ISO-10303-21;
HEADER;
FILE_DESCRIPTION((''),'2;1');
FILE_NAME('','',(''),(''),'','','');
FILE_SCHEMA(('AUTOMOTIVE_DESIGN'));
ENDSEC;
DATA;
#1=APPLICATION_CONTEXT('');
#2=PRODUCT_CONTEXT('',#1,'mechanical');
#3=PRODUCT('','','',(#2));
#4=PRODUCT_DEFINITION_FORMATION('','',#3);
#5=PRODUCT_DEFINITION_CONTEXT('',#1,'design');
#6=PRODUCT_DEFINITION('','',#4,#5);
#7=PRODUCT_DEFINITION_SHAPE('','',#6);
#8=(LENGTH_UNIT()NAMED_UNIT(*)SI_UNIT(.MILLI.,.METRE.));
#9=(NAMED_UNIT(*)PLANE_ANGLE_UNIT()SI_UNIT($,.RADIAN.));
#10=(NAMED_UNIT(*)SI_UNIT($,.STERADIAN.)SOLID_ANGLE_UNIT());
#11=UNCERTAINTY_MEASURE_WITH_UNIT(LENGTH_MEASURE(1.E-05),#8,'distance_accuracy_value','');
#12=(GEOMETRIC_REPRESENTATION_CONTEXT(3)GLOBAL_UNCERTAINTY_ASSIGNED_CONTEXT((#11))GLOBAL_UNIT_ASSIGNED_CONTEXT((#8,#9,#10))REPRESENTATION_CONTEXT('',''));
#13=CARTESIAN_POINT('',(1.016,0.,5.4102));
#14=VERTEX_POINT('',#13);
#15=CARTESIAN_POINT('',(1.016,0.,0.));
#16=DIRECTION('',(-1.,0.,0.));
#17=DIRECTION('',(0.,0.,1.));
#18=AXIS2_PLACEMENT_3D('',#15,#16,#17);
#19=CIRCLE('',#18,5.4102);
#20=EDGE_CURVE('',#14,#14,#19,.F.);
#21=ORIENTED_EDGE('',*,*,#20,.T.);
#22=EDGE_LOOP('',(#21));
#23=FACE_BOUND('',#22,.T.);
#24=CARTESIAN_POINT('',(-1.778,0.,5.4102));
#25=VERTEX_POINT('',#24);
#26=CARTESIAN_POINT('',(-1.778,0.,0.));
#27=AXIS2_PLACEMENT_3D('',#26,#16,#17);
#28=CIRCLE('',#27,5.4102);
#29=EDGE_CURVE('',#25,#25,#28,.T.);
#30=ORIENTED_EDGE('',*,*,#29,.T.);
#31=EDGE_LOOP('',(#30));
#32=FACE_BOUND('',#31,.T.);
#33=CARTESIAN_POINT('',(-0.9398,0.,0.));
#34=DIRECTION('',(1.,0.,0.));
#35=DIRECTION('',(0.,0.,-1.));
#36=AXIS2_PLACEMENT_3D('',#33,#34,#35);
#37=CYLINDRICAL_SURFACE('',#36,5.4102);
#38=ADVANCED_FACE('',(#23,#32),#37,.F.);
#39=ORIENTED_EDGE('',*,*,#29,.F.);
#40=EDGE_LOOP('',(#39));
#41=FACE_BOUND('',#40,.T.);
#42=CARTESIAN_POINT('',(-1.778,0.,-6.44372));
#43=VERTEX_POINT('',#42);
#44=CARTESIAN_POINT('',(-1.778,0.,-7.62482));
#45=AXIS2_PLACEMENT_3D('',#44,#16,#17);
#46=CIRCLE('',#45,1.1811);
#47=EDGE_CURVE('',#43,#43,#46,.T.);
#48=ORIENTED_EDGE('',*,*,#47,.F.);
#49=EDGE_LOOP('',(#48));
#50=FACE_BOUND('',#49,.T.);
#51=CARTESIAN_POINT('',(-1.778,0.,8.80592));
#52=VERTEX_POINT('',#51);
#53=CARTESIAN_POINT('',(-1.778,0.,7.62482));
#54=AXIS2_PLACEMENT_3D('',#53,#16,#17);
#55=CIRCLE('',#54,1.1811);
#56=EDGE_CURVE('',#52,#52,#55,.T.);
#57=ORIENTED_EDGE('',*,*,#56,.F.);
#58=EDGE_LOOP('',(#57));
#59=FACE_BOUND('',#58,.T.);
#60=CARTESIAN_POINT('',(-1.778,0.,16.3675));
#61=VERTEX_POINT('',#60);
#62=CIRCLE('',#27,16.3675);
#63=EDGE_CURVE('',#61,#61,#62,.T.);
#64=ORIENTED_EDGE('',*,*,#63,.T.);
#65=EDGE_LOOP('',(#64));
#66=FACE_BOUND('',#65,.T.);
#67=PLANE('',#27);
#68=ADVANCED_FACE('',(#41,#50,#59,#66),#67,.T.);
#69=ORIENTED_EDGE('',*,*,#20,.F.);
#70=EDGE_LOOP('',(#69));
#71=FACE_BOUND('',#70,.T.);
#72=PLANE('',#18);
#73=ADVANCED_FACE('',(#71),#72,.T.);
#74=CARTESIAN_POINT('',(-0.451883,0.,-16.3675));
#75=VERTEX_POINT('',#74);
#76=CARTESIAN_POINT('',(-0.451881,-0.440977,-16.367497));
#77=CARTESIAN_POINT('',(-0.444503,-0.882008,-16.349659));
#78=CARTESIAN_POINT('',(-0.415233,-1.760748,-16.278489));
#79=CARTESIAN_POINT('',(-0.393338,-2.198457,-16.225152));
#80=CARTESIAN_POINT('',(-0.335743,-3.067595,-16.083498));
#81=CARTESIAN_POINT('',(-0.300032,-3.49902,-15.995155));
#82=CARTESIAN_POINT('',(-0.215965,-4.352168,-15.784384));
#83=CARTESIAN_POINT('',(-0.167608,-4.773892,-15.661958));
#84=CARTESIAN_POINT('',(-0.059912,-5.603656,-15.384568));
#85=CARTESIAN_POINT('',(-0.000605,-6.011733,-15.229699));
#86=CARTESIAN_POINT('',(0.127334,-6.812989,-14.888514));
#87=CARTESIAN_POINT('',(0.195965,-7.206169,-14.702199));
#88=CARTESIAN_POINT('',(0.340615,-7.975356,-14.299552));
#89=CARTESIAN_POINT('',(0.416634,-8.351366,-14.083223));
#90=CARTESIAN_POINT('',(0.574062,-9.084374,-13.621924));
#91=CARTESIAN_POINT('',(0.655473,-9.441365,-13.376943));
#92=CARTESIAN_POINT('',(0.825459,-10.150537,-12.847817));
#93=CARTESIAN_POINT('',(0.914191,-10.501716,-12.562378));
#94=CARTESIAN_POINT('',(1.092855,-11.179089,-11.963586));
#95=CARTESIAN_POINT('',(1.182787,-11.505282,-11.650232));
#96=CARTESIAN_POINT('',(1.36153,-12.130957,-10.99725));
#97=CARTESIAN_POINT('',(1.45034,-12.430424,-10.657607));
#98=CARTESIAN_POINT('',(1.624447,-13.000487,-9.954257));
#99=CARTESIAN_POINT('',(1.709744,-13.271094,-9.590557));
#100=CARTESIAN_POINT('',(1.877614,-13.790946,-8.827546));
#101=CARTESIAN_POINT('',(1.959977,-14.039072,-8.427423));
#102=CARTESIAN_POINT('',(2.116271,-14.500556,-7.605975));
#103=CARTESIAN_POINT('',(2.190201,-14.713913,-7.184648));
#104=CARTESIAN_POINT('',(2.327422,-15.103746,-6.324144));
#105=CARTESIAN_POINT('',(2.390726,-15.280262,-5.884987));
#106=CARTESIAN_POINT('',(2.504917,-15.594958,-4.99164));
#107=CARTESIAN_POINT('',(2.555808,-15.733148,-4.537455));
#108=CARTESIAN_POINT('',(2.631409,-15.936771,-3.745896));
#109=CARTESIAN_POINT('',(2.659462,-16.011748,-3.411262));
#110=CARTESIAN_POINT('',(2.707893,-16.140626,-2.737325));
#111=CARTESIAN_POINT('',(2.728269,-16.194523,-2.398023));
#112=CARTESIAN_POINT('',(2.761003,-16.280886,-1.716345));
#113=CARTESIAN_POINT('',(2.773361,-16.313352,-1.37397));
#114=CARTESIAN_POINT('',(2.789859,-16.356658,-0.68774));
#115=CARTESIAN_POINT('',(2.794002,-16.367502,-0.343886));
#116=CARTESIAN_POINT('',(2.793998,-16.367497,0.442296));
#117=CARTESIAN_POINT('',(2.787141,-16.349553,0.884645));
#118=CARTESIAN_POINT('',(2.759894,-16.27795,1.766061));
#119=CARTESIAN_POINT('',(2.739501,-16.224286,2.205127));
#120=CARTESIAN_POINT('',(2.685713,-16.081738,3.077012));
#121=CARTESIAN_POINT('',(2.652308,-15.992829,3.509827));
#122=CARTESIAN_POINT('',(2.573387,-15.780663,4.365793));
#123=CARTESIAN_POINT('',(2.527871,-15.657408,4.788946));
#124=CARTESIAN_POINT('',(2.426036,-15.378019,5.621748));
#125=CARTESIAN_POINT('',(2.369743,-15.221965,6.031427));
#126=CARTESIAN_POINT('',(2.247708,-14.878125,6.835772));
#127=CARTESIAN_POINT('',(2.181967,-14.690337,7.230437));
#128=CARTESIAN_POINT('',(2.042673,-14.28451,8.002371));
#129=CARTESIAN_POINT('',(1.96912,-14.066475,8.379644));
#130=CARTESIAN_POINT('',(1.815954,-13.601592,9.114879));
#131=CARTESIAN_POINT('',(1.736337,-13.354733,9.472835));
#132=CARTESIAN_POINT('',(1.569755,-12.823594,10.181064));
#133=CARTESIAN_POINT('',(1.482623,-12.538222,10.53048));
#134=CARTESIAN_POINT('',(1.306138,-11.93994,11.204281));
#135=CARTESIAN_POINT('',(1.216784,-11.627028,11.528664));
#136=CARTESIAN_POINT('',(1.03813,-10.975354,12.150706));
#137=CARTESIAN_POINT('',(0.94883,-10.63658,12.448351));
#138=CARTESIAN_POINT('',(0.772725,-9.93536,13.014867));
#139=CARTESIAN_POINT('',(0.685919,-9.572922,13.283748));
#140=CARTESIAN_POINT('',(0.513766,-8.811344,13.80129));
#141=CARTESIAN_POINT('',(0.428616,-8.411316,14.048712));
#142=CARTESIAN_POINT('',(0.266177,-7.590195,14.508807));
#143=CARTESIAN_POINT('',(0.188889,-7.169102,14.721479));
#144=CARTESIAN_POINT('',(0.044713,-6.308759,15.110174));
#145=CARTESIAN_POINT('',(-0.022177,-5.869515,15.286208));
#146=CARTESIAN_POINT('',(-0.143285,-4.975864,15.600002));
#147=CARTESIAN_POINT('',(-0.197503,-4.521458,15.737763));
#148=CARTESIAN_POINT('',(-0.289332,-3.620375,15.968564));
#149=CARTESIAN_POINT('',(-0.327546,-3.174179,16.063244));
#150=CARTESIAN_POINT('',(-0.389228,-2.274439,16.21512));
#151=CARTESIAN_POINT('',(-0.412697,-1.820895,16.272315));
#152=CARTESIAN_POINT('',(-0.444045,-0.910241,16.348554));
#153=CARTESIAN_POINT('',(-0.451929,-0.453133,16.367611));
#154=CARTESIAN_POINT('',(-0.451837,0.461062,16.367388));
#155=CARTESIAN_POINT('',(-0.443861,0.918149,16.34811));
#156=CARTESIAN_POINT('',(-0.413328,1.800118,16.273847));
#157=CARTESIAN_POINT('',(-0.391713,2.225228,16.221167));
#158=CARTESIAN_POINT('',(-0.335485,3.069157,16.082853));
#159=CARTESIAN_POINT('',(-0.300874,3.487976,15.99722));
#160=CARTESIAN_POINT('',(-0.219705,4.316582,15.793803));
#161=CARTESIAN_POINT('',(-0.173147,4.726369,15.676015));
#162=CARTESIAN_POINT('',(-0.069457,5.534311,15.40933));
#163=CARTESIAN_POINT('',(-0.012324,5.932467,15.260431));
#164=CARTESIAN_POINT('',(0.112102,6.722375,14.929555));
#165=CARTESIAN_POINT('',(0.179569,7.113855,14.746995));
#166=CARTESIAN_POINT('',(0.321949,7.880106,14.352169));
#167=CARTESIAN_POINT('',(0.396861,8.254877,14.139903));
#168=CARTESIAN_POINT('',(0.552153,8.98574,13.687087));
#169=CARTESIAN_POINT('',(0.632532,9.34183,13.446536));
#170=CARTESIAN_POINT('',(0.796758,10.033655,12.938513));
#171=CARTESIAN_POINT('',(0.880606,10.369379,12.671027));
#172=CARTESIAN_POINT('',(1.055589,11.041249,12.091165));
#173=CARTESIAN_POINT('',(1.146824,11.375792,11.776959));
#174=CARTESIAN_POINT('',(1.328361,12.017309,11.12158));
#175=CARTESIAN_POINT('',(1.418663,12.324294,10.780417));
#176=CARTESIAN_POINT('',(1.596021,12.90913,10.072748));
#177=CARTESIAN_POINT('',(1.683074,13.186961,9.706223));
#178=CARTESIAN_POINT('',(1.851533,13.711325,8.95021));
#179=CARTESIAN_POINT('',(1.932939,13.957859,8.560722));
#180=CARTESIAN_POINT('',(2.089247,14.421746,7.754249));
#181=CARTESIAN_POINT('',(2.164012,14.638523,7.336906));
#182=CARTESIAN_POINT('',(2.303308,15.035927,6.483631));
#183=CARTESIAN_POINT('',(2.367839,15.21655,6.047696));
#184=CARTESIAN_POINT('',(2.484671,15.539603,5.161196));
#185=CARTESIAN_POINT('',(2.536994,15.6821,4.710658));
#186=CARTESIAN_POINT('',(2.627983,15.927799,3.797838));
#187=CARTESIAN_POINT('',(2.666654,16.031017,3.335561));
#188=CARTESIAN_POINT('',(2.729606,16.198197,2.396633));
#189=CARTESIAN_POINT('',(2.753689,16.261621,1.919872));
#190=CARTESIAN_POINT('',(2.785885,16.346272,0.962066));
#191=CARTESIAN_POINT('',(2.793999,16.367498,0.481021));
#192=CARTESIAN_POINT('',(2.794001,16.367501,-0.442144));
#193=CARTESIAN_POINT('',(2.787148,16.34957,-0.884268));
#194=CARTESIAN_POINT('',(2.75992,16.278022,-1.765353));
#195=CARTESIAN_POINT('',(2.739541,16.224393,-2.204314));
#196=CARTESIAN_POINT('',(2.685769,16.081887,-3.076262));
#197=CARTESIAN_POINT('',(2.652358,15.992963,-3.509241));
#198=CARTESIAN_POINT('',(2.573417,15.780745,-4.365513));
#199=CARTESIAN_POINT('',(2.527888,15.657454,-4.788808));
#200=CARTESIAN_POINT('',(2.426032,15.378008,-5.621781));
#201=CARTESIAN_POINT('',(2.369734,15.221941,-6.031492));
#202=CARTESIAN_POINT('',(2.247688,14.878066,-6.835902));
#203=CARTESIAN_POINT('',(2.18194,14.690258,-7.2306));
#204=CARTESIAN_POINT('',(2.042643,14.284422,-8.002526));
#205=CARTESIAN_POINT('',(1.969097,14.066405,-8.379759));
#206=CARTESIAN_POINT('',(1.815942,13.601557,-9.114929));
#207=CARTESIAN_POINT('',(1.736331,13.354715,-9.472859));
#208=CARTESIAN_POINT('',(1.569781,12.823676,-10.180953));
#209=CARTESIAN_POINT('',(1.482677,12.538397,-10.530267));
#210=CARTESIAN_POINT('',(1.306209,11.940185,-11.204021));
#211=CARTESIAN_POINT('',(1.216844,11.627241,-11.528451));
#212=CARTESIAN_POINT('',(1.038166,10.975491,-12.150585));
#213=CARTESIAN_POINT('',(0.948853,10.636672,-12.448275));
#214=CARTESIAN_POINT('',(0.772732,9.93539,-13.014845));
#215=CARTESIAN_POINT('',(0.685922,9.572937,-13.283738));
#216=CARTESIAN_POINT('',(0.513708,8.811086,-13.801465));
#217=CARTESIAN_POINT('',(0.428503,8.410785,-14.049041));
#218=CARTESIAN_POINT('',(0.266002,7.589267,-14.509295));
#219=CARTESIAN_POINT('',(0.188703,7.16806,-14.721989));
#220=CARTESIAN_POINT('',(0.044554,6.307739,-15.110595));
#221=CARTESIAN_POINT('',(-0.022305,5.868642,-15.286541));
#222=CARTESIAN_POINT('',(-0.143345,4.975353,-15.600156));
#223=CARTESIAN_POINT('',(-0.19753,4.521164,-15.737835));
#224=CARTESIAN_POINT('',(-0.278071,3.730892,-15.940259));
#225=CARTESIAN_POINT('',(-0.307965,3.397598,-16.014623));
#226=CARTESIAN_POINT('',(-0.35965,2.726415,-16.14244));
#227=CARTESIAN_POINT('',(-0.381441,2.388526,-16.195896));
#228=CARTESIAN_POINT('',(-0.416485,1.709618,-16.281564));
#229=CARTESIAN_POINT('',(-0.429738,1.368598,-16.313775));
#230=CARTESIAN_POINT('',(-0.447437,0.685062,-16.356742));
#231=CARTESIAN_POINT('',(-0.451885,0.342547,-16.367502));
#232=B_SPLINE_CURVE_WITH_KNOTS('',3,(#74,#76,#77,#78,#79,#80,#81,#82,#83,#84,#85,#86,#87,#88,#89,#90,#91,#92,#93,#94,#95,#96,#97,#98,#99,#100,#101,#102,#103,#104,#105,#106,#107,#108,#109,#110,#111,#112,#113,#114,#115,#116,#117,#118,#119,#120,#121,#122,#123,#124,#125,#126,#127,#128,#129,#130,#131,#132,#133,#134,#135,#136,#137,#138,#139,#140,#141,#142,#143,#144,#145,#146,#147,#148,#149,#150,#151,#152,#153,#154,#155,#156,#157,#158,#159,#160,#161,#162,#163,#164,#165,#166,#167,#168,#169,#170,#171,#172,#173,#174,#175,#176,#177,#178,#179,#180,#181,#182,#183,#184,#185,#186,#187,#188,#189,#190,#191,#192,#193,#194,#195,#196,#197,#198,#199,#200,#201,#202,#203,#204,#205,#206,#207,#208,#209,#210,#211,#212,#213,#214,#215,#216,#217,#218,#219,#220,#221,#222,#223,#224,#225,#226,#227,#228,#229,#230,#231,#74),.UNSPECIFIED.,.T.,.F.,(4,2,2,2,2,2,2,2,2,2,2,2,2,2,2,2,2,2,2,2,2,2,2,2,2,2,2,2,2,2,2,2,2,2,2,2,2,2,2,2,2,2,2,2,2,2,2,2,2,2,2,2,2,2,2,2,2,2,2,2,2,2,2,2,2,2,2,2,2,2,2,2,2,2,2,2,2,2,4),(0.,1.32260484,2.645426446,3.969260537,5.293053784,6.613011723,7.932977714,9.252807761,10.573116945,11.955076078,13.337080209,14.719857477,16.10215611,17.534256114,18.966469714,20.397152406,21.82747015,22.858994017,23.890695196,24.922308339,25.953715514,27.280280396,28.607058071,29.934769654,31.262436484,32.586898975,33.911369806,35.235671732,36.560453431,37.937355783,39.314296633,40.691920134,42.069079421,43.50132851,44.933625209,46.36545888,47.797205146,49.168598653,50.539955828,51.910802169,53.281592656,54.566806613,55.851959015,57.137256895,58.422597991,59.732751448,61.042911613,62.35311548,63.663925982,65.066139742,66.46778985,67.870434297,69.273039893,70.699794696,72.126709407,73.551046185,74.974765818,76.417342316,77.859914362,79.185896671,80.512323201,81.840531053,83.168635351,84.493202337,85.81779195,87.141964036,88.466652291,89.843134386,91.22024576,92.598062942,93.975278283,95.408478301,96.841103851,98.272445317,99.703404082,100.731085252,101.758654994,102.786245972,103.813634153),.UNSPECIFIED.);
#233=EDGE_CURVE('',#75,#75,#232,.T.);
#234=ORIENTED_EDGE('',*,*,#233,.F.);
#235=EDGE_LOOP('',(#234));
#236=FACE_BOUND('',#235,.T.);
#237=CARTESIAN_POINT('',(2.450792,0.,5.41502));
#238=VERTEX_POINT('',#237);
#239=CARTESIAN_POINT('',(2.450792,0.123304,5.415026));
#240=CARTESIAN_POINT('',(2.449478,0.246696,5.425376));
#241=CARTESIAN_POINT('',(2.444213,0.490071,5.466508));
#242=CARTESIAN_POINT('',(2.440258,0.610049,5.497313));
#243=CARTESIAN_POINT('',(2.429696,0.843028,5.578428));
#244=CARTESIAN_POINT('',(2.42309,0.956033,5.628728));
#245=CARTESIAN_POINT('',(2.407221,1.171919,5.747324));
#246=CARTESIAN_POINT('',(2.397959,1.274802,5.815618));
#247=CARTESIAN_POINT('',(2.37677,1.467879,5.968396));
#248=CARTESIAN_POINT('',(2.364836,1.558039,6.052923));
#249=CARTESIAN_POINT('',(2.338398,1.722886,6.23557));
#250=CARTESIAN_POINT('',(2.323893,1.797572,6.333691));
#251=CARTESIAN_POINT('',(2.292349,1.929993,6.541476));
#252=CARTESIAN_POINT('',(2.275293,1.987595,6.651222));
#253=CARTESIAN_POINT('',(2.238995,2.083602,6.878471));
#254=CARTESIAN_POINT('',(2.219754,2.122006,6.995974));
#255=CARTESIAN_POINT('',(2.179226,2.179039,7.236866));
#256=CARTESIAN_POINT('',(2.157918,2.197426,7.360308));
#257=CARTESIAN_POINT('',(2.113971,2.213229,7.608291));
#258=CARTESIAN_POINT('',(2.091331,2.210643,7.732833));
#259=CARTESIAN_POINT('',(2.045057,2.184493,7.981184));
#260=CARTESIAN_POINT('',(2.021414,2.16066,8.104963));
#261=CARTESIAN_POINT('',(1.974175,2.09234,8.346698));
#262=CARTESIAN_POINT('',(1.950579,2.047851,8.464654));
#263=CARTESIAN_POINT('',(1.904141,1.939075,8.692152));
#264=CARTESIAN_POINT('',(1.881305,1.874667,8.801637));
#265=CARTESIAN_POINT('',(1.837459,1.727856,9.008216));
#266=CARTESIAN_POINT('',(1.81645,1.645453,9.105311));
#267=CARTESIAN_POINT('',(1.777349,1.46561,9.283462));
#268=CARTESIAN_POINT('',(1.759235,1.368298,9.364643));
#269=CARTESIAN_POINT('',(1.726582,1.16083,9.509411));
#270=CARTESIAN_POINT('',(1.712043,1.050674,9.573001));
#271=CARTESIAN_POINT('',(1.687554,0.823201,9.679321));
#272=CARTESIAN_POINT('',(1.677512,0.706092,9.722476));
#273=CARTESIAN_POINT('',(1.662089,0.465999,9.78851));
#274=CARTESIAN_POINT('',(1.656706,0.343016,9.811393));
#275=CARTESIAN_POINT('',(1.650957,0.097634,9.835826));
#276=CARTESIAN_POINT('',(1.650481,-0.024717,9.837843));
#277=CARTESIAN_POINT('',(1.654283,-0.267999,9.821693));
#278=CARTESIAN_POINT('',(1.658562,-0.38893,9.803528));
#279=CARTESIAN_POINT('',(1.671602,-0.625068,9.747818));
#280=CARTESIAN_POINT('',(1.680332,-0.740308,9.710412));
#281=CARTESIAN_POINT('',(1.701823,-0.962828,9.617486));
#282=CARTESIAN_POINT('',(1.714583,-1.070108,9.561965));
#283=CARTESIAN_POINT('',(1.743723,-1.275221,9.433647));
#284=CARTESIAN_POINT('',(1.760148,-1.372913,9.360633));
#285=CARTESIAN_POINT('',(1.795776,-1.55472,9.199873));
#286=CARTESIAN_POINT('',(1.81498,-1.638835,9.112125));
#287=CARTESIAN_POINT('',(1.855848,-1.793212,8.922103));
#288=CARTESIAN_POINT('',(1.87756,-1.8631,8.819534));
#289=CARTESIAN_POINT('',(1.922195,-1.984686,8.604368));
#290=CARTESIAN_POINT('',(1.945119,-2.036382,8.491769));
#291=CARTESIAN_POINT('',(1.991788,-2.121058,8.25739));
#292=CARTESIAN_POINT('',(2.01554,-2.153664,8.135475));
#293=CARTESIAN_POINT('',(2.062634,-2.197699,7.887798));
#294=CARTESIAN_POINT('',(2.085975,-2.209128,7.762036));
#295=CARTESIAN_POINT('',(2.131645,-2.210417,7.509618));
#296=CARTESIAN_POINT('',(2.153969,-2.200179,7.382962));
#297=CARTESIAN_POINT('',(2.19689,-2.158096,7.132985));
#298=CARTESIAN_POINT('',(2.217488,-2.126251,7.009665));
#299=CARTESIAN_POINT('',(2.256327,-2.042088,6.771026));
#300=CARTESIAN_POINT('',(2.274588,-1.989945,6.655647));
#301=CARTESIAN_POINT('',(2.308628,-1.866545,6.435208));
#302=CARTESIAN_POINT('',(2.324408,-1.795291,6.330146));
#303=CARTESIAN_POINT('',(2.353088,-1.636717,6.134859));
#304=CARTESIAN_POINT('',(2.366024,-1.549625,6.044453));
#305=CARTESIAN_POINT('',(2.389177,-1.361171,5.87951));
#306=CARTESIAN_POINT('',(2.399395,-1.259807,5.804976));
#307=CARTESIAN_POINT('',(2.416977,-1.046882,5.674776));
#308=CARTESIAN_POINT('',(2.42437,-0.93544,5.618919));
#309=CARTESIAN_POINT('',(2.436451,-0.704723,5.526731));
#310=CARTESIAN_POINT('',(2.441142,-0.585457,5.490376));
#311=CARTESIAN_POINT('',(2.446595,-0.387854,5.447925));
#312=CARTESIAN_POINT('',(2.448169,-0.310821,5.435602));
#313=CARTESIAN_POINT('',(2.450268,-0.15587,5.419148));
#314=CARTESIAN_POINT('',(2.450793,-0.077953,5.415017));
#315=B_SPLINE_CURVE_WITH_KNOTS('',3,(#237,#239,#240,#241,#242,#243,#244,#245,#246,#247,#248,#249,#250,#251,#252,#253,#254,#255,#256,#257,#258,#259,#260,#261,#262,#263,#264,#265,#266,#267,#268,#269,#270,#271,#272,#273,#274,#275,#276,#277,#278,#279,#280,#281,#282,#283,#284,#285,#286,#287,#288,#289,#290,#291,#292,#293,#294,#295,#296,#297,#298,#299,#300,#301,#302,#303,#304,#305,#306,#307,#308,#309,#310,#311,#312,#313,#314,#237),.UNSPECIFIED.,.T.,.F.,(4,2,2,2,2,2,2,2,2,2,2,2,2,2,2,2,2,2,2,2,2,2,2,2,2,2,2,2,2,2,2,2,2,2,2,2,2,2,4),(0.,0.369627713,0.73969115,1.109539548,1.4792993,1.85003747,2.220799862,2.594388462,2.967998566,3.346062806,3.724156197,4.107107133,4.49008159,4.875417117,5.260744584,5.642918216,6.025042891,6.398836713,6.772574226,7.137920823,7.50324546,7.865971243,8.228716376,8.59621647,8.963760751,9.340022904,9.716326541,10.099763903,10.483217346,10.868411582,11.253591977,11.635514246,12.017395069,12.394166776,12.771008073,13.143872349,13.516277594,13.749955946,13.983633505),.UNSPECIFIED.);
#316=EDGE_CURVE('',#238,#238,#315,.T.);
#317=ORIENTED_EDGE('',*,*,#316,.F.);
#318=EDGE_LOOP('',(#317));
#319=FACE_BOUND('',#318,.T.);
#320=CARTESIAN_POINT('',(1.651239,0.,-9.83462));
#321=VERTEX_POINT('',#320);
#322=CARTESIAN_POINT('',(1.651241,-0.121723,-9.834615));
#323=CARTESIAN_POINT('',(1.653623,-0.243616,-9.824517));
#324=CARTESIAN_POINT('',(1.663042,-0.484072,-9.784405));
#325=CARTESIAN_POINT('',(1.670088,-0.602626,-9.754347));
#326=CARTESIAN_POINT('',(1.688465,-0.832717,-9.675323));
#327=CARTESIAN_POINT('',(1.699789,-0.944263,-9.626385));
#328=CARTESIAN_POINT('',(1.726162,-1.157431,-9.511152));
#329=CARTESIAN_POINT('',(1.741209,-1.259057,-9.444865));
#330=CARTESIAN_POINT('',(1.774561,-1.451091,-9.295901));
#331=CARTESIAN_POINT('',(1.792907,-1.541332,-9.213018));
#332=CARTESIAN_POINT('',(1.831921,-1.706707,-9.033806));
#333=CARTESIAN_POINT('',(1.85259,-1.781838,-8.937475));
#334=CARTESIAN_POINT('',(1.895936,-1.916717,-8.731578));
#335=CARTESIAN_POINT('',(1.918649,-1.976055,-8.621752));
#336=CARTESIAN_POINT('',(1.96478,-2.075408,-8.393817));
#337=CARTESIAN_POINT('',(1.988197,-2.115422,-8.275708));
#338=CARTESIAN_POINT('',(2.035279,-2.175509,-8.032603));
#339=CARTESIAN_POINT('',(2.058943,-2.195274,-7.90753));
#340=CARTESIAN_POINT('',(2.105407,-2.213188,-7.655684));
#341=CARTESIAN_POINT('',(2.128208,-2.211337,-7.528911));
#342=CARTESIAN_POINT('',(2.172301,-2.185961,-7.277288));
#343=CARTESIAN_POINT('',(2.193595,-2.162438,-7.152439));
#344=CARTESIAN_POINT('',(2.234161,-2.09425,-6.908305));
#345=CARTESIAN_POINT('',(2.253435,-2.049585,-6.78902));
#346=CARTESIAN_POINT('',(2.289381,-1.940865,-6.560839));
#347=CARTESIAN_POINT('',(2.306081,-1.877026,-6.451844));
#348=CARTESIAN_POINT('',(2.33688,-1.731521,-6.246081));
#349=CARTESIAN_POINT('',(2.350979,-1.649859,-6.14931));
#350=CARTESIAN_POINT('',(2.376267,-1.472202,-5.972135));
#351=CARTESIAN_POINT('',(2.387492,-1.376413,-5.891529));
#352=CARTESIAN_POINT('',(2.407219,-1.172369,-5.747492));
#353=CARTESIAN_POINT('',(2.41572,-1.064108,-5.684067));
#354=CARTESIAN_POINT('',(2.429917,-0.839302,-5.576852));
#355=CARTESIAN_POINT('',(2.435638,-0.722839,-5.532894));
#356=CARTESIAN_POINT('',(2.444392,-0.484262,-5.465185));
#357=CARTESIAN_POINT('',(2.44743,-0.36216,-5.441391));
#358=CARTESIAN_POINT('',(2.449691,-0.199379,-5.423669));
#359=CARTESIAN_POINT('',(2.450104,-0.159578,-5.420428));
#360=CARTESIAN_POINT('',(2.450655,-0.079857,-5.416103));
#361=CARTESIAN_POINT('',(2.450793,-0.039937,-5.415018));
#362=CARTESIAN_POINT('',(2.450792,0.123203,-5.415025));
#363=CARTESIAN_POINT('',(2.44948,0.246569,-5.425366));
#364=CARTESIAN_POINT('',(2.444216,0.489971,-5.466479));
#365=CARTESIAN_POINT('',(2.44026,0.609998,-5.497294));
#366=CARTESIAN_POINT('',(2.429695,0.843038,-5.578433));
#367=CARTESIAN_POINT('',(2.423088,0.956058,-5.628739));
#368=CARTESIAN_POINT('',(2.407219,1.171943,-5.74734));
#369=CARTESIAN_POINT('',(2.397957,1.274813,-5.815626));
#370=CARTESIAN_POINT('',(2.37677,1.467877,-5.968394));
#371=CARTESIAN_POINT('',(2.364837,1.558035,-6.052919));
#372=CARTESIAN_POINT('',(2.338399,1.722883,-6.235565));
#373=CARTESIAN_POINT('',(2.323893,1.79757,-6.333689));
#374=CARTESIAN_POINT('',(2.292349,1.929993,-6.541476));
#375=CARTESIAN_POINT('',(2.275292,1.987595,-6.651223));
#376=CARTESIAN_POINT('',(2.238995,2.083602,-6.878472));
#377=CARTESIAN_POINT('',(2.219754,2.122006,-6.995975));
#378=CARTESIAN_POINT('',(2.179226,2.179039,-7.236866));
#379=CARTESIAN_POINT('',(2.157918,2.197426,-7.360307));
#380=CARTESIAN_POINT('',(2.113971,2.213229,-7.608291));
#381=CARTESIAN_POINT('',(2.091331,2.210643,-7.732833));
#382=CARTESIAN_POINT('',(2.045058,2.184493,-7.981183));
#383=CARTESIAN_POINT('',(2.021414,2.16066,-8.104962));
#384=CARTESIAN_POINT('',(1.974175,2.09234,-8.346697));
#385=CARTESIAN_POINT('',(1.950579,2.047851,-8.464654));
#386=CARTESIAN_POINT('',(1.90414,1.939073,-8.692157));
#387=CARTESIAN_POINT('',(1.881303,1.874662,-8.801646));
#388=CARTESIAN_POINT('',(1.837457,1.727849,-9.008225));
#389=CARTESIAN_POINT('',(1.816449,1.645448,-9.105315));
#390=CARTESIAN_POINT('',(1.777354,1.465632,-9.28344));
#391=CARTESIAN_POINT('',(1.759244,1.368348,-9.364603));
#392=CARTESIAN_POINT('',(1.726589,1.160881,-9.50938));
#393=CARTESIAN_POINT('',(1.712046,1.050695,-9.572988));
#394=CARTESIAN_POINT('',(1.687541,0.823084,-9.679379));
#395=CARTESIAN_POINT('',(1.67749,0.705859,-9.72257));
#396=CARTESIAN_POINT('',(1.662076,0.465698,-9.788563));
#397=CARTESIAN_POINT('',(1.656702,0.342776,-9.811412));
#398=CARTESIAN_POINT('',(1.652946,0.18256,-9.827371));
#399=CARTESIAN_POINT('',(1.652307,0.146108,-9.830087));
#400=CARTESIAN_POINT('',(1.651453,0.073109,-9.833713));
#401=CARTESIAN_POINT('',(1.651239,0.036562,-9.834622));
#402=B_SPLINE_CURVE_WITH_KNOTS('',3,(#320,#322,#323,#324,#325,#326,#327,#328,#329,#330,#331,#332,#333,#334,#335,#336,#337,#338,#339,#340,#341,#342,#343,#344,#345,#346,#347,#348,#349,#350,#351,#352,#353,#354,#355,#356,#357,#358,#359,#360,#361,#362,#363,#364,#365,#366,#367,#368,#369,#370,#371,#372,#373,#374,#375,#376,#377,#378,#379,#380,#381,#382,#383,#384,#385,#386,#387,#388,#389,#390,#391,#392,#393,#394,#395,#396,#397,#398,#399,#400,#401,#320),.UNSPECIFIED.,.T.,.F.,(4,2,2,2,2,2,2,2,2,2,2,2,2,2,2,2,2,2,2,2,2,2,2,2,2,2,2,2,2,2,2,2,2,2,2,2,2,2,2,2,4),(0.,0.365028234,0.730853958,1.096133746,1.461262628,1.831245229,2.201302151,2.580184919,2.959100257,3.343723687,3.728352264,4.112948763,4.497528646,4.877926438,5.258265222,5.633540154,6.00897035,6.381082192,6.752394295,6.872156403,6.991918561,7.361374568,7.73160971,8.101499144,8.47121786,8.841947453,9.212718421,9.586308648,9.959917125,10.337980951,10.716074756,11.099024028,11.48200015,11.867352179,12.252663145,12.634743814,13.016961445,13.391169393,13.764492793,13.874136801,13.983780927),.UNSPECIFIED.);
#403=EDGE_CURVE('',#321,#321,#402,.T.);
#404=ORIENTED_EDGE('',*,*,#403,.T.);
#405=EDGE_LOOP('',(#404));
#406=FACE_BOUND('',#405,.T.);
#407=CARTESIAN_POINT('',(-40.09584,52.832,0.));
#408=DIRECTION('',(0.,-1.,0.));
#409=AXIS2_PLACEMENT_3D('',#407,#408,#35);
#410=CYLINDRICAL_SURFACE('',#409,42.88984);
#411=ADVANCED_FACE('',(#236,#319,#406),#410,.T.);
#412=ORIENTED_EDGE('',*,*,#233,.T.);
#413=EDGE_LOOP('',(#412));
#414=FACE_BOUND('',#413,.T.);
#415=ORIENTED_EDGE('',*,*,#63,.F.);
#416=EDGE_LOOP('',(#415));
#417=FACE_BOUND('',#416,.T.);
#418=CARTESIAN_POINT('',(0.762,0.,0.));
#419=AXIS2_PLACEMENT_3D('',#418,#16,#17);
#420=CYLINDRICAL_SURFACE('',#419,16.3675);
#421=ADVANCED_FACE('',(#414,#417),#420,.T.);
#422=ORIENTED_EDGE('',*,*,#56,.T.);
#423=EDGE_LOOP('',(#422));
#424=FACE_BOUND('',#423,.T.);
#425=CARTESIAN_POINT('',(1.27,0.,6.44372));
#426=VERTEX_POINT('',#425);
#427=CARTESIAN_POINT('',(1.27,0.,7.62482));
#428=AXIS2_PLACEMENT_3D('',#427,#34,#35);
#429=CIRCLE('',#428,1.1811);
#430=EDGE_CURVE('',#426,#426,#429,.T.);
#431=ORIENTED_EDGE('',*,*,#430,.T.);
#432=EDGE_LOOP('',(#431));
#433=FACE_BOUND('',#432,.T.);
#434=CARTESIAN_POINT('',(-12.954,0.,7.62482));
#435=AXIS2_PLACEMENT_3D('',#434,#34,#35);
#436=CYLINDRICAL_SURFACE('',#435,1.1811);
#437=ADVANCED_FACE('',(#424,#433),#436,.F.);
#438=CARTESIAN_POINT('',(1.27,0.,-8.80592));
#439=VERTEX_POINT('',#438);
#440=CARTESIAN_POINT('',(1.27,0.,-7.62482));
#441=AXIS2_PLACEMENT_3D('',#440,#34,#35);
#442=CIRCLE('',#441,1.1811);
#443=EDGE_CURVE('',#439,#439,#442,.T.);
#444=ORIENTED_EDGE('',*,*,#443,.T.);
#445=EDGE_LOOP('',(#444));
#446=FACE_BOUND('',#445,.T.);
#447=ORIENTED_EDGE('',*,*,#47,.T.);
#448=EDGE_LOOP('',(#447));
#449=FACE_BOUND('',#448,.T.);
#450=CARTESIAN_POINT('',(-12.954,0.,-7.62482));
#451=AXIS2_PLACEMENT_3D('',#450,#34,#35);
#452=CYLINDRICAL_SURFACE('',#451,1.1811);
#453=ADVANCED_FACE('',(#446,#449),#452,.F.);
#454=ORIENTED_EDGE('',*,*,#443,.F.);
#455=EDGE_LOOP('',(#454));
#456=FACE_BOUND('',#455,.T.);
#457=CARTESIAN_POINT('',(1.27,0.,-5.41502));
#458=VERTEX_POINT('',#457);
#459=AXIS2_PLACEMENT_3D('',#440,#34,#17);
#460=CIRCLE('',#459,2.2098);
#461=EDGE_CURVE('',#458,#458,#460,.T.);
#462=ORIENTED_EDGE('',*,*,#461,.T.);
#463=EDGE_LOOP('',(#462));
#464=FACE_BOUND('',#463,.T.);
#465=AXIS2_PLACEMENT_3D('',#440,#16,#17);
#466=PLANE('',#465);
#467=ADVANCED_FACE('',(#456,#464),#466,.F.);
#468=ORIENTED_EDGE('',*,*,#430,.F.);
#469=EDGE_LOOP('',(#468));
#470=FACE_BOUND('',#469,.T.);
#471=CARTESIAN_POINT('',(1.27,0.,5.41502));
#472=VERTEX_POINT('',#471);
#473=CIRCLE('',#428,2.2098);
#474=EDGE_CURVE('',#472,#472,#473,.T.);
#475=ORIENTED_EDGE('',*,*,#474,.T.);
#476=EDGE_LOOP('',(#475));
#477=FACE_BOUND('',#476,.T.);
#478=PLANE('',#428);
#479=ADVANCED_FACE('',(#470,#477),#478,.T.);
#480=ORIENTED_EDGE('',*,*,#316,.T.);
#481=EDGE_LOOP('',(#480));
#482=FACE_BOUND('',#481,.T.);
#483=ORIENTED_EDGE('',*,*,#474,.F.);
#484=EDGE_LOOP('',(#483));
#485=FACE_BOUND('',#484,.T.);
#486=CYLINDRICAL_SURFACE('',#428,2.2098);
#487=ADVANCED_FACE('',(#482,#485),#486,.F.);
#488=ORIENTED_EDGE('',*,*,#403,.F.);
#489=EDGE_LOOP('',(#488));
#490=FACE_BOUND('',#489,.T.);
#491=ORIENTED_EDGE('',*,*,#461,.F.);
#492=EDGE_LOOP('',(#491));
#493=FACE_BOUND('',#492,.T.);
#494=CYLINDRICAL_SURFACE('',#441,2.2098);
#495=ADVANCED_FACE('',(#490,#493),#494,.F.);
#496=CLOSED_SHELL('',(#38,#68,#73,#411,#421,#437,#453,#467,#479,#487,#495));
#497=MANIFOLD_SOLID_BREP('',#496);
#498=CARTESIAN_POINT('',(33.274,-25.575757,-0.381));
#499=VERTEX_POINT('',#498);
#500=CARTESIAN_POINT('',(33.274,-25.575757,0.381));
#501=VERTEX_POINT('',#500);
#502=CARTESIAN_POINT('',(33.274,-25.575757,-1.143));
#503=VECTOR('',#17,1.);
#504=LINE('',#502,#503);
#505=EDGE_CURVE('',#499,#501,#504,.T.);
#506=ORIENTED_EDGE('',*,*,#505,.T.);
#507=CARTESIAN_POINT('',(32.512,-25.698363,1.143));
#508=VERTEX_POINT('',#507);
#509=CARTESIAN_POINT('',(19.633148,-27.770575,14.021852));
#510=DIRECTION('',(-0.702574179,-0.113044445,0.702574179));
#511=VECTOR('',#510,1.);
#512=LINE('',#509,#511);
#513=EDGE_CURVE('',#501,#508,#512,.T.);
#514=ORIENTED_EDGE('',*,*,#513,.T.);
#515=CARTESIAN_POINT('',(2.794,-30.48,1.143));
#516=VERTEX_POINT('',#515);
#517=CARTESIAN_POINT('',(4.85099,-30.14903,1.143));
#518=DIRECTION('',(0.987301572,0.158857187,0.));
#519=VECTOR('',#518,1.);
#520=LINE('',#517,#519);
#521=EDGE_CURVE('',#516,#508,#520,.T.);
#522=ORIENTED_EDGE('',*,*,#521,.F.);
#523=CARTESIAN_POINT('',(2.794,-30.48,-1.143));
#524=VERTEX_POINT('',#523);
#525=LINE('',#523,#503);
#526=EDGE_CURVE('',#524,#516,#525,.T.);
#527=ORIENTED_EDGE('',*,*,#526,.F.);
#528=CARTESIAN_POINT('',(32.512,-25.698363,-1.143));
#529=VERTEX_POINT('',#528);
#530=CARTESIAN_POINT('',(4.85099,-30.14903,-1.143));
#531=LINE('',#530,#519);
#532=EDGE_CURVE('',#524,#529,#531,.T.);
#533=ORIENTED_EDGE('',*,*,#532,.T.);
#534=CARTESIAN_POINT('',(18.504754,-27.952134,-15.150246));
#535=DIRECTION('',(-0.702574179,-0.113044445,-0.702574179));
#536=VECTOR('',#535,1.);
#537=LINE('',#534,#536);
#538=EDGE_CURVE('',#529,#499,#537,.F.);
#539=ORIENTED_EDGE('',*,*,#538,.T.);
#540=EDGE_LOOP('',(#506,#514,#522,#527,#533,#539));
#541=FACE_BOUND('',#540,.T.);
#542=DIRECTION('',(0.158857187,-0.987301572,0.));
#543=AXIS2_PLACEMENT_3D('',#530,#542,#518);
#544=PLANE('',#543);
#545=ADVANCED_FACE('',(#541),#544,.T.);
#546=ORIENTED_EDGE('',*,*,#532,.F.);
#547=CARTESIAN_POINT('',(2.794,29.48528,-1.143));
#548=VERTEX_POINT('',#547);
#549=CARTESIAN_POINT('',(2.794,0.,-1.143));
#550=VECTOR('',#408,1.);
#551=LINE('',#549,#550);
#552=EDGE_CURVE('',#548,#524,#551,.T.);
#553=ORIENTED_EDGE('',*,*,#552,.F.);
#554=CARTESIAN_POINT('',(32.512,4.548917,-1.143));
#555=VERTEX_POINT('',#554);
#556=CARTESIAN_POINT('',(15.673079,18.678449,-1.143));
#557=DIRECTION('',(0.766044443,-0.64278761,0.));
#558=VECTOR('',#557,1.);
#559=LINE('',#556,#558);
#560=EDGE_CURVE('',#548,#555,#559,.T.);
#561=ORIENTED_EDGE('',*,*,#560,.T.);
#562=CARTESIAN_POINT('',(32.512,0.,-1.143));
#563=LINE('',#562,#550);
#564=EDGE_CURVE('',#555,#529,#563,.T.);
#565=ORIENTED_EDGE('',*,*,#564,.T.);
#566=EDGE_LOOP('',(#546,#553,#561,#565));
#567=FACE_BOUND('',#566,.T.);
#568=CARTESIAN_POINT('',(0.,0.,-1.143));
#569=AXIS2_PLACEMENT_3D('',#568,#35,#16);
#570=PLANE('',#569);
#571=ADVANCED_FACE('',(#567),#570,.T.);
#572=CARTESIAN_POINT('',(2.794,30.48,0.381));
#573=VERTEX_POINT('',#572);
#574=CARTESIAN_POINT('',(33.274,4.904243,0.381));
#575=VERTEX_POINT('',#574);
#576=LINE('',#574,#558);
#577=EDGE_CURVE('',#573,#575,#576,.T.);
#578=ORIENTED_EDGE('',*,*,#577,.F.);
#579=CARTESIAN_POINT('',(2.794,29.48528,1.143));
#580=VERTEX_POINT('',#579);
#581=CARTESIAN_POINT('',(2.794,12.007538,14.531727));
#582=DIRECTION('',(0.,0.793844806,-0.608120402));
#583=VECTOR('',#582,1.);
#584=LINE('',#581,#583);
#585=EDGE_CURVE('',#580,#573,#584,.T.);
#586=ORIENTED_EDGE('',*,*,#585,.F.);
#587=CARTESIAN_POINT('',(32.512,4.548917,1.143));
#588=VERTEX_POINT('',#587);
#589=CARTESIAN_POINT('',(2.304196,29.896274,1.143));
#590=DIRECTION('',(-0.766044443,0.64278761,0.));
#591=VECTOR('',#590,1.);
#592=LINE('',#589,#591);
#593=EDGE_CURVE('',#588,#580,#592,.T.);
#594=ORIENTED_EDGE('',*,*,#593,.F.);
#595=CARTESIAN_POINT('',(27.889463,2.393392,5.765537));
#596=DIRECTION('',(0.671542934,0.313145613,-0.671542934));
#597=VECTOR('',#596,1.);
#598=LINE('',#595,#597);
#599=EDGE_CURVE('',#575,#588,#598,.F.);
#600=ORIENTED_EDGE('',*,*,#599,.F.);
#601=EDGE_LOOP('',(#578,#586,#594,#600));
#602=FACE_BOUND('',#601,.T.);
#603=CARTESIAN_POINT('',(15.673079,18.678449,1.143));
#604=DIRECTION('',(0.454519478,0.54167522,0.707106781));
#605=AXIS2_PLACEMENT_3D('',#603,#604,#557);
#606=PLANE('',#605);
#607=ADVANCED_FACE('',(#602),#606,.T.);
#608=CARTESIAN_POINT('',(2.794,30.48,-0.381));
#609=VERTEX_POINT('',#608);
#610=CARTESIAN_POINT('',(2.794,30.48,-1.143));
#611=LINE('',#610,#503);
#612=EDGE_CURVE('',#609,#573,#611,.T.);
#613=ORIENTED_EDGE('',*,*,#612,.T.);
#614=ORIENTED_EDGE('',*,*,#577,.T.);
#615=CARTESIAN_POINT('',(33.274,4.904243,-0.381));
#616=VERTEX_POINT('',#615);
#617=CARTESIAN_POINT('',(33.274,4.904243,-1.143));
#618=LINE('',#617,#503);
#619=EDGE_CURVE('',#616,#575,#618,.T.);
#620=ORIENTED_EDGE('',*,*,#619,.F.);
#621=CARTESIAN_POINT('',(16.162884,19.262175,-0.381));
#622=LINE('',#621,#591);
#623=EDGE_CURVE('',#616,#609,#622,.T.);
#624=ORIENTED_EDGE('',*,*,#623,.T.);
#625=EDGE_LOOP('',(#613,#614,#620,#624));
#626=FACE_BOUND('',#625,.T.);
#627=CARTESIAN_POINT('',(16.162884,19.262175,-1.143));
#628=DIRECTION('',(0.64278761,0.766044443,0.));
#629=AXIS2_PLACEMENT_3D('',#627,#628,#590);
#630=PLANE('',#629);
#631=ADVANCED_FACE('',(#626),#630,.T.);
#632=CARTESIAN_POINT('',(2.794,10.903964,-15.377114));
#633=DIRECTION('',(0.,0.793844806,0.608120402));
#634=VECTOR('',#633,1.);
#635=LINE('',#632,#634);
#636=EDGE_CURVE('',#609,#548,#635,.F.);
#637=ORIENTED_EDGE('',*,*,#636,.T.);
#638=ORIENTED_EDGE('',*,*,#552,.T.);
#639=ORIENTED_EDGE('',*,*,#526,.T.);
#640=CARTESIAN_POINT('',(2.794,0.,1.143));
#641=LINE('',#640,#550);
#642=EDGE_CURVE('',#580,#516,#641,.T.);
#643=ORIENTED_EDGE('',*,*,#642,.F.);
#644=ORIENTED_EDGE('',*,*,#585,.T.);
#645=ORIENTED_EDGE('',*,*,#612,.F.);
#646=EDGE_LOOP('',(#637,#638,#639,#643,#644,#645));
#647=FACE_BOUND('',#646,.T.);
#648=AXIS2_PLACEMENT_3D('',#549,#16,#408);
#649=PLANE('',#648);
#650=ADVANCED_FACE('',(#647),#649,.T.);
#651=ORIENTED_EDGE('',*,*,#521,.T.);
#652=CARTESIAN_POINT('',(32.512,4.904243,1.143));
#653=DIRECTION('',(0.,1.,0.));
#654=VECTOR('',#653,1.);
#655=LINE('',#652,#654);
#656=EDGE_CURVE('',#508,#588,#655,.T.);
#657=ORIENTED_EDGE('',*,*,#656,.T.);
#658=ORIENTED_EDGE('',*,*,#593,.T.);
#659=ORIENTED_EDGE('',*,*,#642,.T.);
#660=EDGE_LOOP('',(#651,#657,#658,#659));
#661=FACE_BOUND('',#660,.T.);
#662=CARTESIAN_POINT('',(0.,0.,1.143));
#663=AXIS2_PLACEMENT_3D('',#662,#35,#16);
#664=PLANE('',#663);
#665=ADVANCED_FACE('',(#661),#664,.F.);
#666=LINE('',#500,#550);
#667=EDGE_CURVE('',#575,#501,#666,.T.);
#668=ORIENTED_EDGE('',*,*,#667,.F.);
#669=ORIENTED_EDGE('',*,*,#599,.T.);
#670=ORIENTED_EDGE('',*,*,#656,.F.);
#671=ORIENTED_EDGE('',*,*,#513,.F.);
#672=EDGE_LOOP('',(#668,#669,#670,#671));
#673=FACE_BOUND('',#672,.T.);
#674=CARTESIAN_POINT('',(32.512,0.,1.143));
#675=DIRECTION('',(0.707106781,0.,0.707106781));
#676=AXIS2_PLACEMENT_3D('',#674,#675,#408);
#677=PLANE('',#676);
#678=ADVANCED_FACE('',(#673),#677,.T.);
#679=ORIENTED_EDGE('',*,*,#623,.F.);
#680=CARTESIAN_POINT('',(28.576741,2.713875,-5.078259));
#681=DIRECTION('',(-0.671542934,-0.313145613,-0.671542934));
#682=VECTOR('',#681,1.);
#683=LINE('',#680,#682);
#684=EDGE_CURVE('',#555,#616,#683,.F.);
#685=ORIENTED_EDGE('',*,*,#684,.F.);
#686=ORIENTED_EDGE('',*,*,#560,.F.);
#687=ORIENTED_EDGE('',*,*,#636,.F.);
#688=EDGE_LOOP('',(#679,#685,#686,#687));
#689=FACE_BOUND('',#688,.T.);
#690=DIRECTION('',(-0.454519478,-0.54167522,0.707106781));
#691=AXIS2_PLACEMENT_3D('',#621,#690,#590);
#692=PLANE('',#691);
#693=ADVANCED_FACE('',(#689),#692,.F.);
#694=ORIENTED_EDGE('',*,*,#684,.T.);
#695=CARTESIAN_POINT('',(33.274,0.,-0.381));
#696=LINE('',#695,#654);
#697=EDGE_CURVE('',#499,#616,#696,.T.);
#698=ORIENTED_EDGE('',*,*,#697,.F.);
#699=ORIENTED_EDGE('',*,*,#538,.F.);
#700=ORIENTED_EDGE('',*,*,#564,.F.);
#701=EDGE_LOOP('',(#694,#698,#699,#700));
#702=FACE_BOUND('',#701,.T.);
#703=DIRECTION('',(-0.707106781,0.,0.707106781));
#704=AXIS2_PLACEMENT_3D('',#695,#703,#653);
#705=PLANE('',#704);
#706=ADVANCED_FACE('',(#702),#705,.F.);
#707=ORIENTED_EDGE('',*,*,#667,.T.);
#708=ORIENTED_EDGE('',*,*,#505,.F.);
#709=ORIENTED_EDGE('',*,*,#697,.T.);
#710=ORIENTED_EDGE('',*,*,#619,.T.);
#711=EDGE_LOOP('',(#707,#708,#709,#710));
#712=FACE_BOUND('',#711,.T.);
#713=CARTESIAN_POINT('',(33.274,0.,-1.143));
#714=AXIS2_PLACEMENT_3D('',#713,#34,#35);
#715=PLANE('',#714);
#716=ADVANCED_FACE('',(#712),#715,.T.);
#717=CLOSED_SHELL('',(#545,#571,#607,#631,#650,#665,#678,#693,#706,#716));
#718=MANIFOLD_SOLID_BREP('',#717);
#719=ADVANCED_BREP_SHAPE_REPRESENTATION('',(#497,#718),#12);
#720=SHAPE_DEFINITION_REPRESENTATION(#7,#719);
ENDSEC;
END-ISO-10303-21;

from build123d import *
from build123d.topology import SkipClean

# Parameters (mm, degrees)
SKETCH13_R               = 16.367500031
BOSS_EXTRUDE11_DEPTH     = 0.762
SKETCH14_R               = 16.367500031
BOSS_EXTRUDE12_DEPTH     = 0.508
BOSS_EXTRUDE13_DEPTH     = 0.9525
CHAMFER6_SIZE            = 0.762
BOSS_EXTRUDE19_DEPTH     = 1.016
BOSS_EXTRUDE20_START     = 1.524
BOSS_EXTRUDE20_DEPTH     = 1.524
SKETCH28_R               = 2.2098
CUT_EXTRUDE9_DEPTH       = 1.524
SKETCH29_R               = 1.1811
CUT_EXTRUDE10_DEPTH      = 14.224
CUT_EXTRUDE15_START      = 52.832
SKETCH35_R               = 16.367500031
CUT_EXTRUDE15_DEPTH      = 52.832
CUT_EXTRUDE16_DEPTH      = 52.832
CUT_EXTRUDE16_DEPTH_BACK = 52.832
SKETCH36_R               = 29.172390064
SKETCH36_R_2             = 16.367500031
CUT_EXTRUDE17_DEPTH      = 52.832
CUT_EXTRUDE17_DEPTH_BACK = 52.832
BOSS_EXTRUDE21_DEPTH     = 1.143
CHAMFER7_SIZE            = 0.762
SKETCH41_R               = 2.921
CUT_EXTRUDE19_DEPTH      = 1.524
SKETCH42_R               = 4.064
CUT_EXTRUDE20_DEPTH      = 0.762
SKETCH43_R               = 2.921
CUT_EXTRUDE21_DEPTH      = 0.508
CUT_EXTRUDE24_DEPTH      = 0.9398
CUT_EXTRUDE24_DEPTH_BACK = 0.9398
SKETCH44_R               = 5.4102
SKETCH46_R               = 2.921
CUT_EXTRUDE25_DEPTH      = 0.508
SKETCH47_R               = 16.367500031
SKETCH47_R_2             = 1.1811
SKETCH47_R_3             = 5.4102
BOSS_EXTRUDE22_DEPTH     = 1.016
BOSS_EXTRUDE23_START     = 1.524
SKETCH48_R               = 5.4102
SKETCH48_R_2             = 2.921
BOSS_EXTRUDE23_DEPTH     = 1.524
BOSS_EXTRUDE24_START     = 0.762
SKETCH49_R               = 2.921
BOSS_EXTRUDE24_DEPTH     = 0.762
CUT_EXTRUDE26_START      = -1.6002
SKETCH51_R               = 5.4102
CUT_EXTRUDE26_DEPTH      = 1.6002


with BuildPart() as part:
    # Sketch13 → Boss-Extrude11 (new, symmetric)
    with BuildSketch(Plane(origin=(0, 0, 0), x_dir=(0, 0, -1), z_dir=(1, 0, 0))):
        with Locations(Location((0, 0, 0), (0, 0, 180))):
            Circle(SKETCH13_R)
        with BuildLine():
            Line((-2.621749746, -2.242527206), (-1.817157123, -14.183327087))
            ThreePointArc((-1.817157123, -14.183327087), (0.203701313, -16.048707293), (2.176562947, -14.132636025))
            Line((2.176562947, -14.132636025), (2.677823379, -2.175261352))
            ThreePointArc((2.677823379, -2.175261352), (-0.043786264, 3.449722128), (-2.621749746, -2.242527206))
        make_face(mode=Mode.SUBTRACT)
    extrude(amount=BOSS_EXTRUDE11_DEPTH, both=True)

    # Sketch14 → Boss-Extrude12 (add, symmetric)
    with BuildSketch(Plane(origin=(0.762, 0, 0), x_dir=(0, 0, -1), z_dir=(1, 0, 0))):
        with Locations(Location((0, 0, 0), (0, 0, 180))):
            Circle(SKETCH14_R)
    extrude(amount=BOSS_EXTRUDE12_DEPTH, both=True)

    # Sketch15 → Boss-Extrude13 (add, symmetric)
    with BuildSketch(Plane.XY):
        Polygon((1.27, 0), (1.27, 25.4), (26.67, 4.086869368), (26.67, -21.313130632), (1.27, -25.4), align=None)
    extrude(amount=BOSS_EXTRUDE13_DEPTH, both=True)

    # Chamfer6
    chamfer6_edges = [part.edges().sort_by_distance(p)[0] for p in [
        (26.67, -8.613130632, -0.9525),
        (13.97, 14.743434684, -0.9525),
        (26.67, -8.613130632, 0.9525),
        (13.97, 14.743434684, 0.9525),
    ]]
    chamfer(chamfer6_edges, length=CHAMFER6_SIZE)

    # Sketch26 → Boss-Extrude19 (add)
    with BuildSketch(Plane.ZY.offset(-0.254)):
        with BuildLine():
            Line((-2.677823379, -2.175261352), (-2.176562947, -14.132636025))
            ThreePointArc((-2.176562947, -14.132636025), (-0.203701313, -16.048707293), (1.817157123, -14.183327087))
            Line((1.817157123, -14.183327087), (2.621749746, -2.242527206))
            ThreePointArc((2.621749746, -2.242527206), (0.043786264, 3.449722128), (-2.677823379, -2.175261352))
        make_face()
    extrude(amount=BOSS_EXTRUDE19_DEPTH)

    # Sketch27 → Boss-Extrude20 (add)
    with BuildSketch(Plane(origin=(1.27, 0, 0), x_dir=(0, 0, -1), z_dir=(1, 0, 0)).offset(BOSS_EXTRUDE20_START)):
        with BuildLine():
            Line((0.9525, 16.339761351), (0.9525, -16.339761351))
            ThreePointArc((0.9525, -16.339761351), (16.367500031, 0), (0.9525, 16.339761351))
        make_face()
        with BuildLine():
            Line((-0.9525, -16.339761351), (-0.9525, 16.339761351))
            ThreePointArc((-0.9525, 16.339761351), (-16.367500031, 0), (-0.9525, -16.339761351))
        make_face()
    extrude(amount=-BOSS_EXTRUDE20_DEPTH)

    # Sketch28 → Cut-Extrude9 (cut)
    with BuildSketch(Plane(origin=(2.794, 0, 0), x_dir=(0, 0, -1), z_dir=(1, 0, 0))):
        with Locations((-7.624820031, 0)):
            Circle(SKETCH28_R)
        with Locations((7.624820031, 0)):
            Circle(SKETCH28_R)
    extrude(amount=-CUT_EXTRUDE9_DEPTH, mode=Mode.SUBTRACT)

    # Sketch29 → Cut-Extrude10 (cut)
    with BuildSketch(Plane(origin=(1.27, 0, 0), x_dir=(0, 0, -1), z_dir=(1, 0, 0))):
        with Locations((-7.624820031, 0)):
            Circle(SKETCH29_R)
        with Locations((7.624820031, 0)):
            Circle(SKETCH29_R)
    extrude(amount=-CUT_EXTRUDE10_DEPTH, mode=Mode.SUBTRACT)

    # Sketch35 → Cut-Extrude15 (cut)
    with BuildSketch(Plane(origin=(2.794, 0, 0), x_dir=(0, 0, -1), z_dir=(1, 0, 0)).offset(CUT_EXTRUDE15_START)):
        with Locations(Location((0, 0, 0), (0, 0, 266.663810568))):
            Circle(SKETCH35_R)
    extrude(amount=-CUT_EXTRUDE15_DEPTH, mode=Mode.SUBTRACT)

    # Sketch36 → Cut-Extrude16 (cut, two sides: drawn at the far end of the back side and taken through both)
    with SkipClean():  # the faces are left unmerged after this step: merging them gives an invalid solid
        with BuildSketch(Plane(origin=(2.794, 0, 0), x_dir=(0, 0, -1), z_dir=(1, 0, 0)).offset(-CUT_EXTRUDE16_DEPTH_BACK)):
            Circle(SKETCH36_R)
            with Locations(Location((0, 0, 0), (0, 0, 180))):
                Circle(SKETCH36_R_2, mode=Mode.SUBTRACT)
        extrude(amount=CUT_EXTRUDE16_DEPTH + CUT_EXTRUDE16_DEPTH_BACK, mode=Mode.SUBTRACT)
    add(part.part.scale(1), mode=Mode.REPLACE)  # the faces are merged on a copy

    # Sketch33 → Cut-Extrude17 (cut, two sides: drawn at the far end of the back side and taken through both)
    with SkipClean():  # the faces are left unmerged after this step: merging them gives an invalid solid
        with BuildSketch(Plane(origin=(0, 0, 0), x_dir=(1, 0, 0), z_dir=(0, 1, 0)).offset(-CUT_EXTRUDE17_DEPTH_BACK)):
            with BuildLine():
                ThreePointArc((2.794, 0), (1.974703997, -8.34312313), (-0.451883084, -16.367500031))
                Line((-0.451883084, -16.367500031), (2.794, -16.367500031))
                Line((2.794, -16.367500031), (2.794, 0))
            make_face()
            with BuildLine():
                Line((2.794, 16.367500031), (-0.451883084, 16.367500031))
                ThreePointArc((-0.451883084, 16.367500031), (1.974703997, 8.34312313), (2.794, 0))
                Line((2.794, 0), (2.794, 16.367500031))
            make_face()
        extrude(amount=CUT_EXTRUDE17_DEPTH + CUT_EXTRUDE17_DEPTH_BACK, mode=Mode.SUBTRACT)
    add(part.part.scale(1), mode=Mode.REPLACE)  # the faces are merged on a copy

    # Sketch41 → Cut-Extrude19 (cut)
    with SkipClean():  # the faces are left unmerged after this step: merging them gives an invalid solid
        with BuildSketch(Plane.ZY.offset(0.762)):
            Circle(SKETCH41_R)
        extrude(amount=-CUT_EXTRUDE19_DEPTH, mode=Mode.SUBTRACT)

    # Sketch42 → Cut-Extrude20 (cut, symmetric)
    with SkipClean():  # the faces are left unmerged after this step: merging them gives an invalid solid
        with BuildSketch(Plane.ZY.offset(0.762)):
            Circle(SKETCH42_R)
        extrude(amount=CUT_EXTRUDE20_DEPTH, both=True, mode=Mode.SUBTRACT)

    # Sketch43 → Cut-Extrude21 (cut, symmetric)
    with SkipClean():  # the faces are left unmerged after this step: merging them gives an invalid solid
        with BuildSketch(Plane.ZY.offset(-0.762)):
            Circle(SKETCH43_R)
        extrude(amount=CUT_EXTRUDE21_DEPTH, both=True, mode=Mode.SUBTRACT)

    # Sketch44 → Cut-Extrude24 (cut, two sides: drawn at the far end of the back side and taken through both)
    with SkipClean():  # the faces are left unmerged after this step: merging them gives an invalid solid
        with BuildSketch(Plane.ZY.offset(-CUT_EXTRUDE24_DEPTH_BACK)):
            with Locations(Location((0, 0, 0), (0, 0, 180))):
                Circle(SKETCH44_R)
        extrude(amount=CUT_EXTRUDE24_DEPTH + CUT_EXTRUDE24_DEPTH_BACK, mode=Mode.SUBTRACT)

    # Sketch46 → Cut-Extrude25 (cut)
    with SkipClean():  # the faces are left unmerged after this step: merging them gives an invalid solid
        with BuildSketch(Plane.ZY.offset(-1.27)):
            Circle(SKETCH46_R)
        extrude(amount=-CUT_EXTRUDE25_DEPTH, mode=Mode.SUBTRACT)

    # Sketch47 → Boss-Extrude22 (add)
    with SkipClean():  # the faces are left unmerged after this step: merging them gives an invalid solid
        with BuildSketch(Plane.ZY.offset(0.762)):
            Circle(SKETCH47_R)
            with Locations(Location((7.624820031, 0, 0), (0, 0, 180))):
                Circle(SKETCH47_R_2, mode=Mode.SUBTRACT)
            with Locations(Location((-7.624820031, 0, 0), (0, 0, 180))):
                Circle(SKETCH47_R_2, mode=Mode.SUBTRACT)
            Circle(SKETCH47_R_3, mode=Mode.SUBTRACT)
        extrude(amount=BOSS_EXTRUDE22_DEPTH)

    # Sketch48 → Boss-Extrude23 (add)
    with SkipClean():  # the faces are left unmerged after this step: merging them gives an invalid solid
        with BuildSketch(Plane.ZY.offset(-0.9398).offset(BOSS_EXTRUDE23_START)):
            Circle(SKETCH48_R)
            Circle(SKETCH48_R_2, mode=Mode.SUBTRACT)
        extrude(amount=-BOSS_EXTRUDE23_DEPTH)

    # Sketch49 → Boss-Extrude24 (add)
    with SkipClean():  # the faces are left unmerged after this step: merging them gives an invalid solid
        with BuildSketch(Plane.ZY.offset(-1.778).offset(BOSS_EXTRUDE24_START)):
            Circle(SKETCH49_R)
        extrude(amount=-BOSS_EXTRUDE24_DEPTH)

    # Sketch51 → Cut-Extrude26 (cut)
    with SkipClean():  # the faces are left unmerged after this step: merging them gives an invalid solid
        with BuildSketch(Plane.ZY.offset(0.5842).offset(CUT_EXTRUDE26_START)):
            Circle(SKETCH51_R)
        extrude(amount=CUT_EXTRUDE26_DEPTH, mode=Mode.SUBTRACT)


with BuildPart() as body_2:
    # Sketch38 → Boss-Extrude21 (new, symmetric)
    with BuildSketch(Plane(origin=(0, 0, 0), x_dir=(-1, 0, 0), z_dir=(0, 0, -1))):
        Polygon((-33.274, 4.904243242), (-2.794, 30.48), (-2.794, 0), (-2.794, -30.48), (-33.274, -25.575756758), align=None)
    extrude(amount=BOSS_EXTRUDE21_DEPTH, both=True)

    # Chamfer7
    chamfer7_edges = [body_2.edges().sort_by_distance(p)[0] for p in [
        (33.274, -10.335756758, -1.143),
        (18.034, 17.692121621, -1.143),
        (33.274, -10.335756758, 1.143),
        (18.034, 17.692121621, 1.143),
    ]]
    chamfer(chamfer7_edges, length=CHAMFER7_SIZE)


solid = Compound([part.part, body_2.part])
